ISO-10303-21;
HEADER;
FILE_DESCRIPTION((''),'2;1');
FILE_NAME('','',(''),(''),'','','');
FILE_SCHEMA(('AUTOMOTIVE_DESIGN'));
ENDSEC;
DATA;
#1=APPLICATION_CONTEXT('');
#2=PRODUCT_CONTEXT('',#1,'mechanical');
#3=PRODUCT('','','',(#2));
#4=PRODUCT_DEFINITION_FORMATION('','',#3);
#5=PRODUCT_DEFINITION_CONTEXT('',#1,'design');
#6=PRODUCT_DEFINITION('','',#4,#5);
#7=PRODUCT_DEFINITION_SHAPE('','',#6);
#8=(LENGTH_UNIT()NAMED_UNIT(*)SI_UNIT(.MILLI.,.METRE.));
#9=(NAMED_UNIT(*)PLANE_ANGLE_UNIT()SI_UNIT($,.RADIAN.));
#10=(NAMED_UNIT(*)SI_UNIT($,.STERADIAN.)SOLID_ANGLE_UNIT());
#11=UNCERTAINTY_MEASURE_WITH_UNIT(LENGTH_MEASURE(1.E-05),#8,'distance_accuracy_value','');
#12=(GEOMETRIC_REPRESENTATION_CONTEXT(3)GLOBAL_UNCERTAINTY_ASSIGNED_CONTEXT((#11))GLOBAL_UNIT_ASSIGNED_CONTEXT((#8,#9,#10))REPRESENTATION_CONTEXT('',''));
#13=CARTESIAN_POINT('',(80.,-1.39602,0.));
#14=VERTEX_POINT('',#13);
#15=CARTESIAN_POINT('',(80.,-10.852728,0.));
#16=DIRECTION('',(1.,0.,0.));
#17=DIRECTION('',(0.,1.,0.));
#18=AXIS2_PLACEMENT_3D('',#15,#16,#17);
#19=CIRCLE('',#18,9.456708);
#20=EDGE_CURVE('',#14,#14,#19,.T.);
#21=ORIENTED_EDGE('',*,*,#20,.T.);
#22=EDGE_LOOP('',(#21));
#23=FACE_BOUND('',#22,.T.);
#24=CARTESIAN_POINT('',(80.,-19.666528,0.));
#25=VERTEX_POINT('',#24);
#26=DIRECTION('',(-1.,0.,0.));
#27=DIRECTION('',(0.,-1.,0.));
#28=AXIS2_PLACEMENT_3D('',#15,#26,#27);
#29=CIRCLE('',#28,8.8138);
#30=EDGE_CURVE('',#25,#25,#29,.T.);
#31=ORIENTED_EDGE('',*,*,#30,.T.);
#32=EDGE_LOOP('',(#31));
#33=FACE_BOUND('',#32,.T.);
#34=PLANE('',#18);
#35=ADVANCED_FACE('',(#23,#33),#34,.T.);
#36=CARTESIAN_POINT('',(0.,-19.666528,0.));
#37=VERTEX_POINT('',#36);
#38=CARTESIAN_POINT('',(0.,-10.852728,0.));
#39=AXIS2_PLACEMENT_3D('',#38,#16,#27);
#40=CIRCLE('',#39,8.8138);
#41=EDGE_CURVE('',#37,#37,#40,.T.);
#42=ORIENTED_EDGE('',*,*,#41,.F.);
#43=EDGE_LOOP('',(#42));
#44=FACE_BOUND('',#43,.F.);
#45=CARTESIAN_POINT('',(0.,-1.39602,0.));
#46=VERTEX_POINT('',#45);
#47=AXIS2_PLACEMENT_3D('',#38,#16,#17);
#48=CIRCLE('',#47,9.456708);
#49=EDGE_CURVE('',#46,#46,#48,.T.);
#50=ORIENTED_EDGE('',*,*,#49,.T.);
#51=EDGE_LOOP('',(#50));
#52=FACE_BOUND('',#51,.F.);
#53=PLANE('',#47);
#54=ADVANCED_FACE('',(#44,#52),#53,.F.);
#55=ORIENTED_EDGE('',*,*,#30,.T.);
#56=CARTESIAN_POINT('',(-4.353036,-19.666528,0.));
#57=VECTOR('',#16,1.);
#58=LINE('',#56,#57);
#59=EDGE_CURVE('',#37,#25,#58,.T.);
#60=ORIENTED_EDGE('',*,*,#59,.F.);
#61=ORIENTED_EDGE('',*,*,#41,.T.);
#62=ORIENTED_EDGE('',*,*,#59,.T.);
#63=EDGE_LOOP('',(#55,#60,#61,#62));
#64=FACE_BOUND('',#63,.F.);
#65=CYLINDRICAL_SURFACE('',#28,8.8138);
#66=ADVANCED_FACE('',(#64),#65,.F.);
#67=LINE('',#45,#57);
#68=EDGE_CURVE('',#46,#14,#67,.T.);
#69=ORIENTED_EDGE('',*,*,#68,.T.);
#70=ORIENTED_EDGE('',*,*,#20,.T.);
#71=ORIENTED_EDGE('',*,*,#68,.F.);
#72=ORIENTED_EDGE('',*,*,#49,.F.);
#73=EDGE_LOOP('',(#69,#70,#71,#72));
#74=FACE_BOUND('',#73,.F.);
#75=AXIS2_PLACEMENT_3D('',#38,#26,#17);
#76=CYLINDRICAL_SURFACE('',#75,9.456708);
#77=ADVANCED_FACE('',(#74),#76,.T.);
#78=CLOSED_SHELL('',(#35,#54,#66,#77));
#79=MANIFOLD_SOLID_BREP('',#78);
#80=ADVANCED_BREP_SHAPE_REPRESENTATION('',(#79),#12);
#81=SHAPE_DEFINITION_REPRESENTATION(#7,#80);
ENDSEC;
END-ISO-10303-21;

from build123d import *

# Parameters (mm, degrees)
F0_R           = 9.4567080568
F1_DEPTH       = 80
F3_D           = 17.6276
F3_CBORE_D     = 17.6276
F3_CBORE_DEPTH = 80


# Not quite as in the source:
# - the program builds the solid bodies; features that only make, move or delete a surface that nothing else refers to are left out


with BuildPart() as f1:
    # F0 (on Right) → F1 (new body)
    with BuildSketch(Plane.YZ):
        with Locations((-10.852728039, 0)):
            Circle(F0_R)
    extrude(amount=F1_DEPTH)

    # F3 (through all)
    with Locations(Plane.YZ.offset(80)):
        with Locations((-10.852728039, 0)):
            CounterBoreHole(F3_D / 2, F3_CBORE_D / 2, F3_CBORE_DEPTH)


solid = f1.part
